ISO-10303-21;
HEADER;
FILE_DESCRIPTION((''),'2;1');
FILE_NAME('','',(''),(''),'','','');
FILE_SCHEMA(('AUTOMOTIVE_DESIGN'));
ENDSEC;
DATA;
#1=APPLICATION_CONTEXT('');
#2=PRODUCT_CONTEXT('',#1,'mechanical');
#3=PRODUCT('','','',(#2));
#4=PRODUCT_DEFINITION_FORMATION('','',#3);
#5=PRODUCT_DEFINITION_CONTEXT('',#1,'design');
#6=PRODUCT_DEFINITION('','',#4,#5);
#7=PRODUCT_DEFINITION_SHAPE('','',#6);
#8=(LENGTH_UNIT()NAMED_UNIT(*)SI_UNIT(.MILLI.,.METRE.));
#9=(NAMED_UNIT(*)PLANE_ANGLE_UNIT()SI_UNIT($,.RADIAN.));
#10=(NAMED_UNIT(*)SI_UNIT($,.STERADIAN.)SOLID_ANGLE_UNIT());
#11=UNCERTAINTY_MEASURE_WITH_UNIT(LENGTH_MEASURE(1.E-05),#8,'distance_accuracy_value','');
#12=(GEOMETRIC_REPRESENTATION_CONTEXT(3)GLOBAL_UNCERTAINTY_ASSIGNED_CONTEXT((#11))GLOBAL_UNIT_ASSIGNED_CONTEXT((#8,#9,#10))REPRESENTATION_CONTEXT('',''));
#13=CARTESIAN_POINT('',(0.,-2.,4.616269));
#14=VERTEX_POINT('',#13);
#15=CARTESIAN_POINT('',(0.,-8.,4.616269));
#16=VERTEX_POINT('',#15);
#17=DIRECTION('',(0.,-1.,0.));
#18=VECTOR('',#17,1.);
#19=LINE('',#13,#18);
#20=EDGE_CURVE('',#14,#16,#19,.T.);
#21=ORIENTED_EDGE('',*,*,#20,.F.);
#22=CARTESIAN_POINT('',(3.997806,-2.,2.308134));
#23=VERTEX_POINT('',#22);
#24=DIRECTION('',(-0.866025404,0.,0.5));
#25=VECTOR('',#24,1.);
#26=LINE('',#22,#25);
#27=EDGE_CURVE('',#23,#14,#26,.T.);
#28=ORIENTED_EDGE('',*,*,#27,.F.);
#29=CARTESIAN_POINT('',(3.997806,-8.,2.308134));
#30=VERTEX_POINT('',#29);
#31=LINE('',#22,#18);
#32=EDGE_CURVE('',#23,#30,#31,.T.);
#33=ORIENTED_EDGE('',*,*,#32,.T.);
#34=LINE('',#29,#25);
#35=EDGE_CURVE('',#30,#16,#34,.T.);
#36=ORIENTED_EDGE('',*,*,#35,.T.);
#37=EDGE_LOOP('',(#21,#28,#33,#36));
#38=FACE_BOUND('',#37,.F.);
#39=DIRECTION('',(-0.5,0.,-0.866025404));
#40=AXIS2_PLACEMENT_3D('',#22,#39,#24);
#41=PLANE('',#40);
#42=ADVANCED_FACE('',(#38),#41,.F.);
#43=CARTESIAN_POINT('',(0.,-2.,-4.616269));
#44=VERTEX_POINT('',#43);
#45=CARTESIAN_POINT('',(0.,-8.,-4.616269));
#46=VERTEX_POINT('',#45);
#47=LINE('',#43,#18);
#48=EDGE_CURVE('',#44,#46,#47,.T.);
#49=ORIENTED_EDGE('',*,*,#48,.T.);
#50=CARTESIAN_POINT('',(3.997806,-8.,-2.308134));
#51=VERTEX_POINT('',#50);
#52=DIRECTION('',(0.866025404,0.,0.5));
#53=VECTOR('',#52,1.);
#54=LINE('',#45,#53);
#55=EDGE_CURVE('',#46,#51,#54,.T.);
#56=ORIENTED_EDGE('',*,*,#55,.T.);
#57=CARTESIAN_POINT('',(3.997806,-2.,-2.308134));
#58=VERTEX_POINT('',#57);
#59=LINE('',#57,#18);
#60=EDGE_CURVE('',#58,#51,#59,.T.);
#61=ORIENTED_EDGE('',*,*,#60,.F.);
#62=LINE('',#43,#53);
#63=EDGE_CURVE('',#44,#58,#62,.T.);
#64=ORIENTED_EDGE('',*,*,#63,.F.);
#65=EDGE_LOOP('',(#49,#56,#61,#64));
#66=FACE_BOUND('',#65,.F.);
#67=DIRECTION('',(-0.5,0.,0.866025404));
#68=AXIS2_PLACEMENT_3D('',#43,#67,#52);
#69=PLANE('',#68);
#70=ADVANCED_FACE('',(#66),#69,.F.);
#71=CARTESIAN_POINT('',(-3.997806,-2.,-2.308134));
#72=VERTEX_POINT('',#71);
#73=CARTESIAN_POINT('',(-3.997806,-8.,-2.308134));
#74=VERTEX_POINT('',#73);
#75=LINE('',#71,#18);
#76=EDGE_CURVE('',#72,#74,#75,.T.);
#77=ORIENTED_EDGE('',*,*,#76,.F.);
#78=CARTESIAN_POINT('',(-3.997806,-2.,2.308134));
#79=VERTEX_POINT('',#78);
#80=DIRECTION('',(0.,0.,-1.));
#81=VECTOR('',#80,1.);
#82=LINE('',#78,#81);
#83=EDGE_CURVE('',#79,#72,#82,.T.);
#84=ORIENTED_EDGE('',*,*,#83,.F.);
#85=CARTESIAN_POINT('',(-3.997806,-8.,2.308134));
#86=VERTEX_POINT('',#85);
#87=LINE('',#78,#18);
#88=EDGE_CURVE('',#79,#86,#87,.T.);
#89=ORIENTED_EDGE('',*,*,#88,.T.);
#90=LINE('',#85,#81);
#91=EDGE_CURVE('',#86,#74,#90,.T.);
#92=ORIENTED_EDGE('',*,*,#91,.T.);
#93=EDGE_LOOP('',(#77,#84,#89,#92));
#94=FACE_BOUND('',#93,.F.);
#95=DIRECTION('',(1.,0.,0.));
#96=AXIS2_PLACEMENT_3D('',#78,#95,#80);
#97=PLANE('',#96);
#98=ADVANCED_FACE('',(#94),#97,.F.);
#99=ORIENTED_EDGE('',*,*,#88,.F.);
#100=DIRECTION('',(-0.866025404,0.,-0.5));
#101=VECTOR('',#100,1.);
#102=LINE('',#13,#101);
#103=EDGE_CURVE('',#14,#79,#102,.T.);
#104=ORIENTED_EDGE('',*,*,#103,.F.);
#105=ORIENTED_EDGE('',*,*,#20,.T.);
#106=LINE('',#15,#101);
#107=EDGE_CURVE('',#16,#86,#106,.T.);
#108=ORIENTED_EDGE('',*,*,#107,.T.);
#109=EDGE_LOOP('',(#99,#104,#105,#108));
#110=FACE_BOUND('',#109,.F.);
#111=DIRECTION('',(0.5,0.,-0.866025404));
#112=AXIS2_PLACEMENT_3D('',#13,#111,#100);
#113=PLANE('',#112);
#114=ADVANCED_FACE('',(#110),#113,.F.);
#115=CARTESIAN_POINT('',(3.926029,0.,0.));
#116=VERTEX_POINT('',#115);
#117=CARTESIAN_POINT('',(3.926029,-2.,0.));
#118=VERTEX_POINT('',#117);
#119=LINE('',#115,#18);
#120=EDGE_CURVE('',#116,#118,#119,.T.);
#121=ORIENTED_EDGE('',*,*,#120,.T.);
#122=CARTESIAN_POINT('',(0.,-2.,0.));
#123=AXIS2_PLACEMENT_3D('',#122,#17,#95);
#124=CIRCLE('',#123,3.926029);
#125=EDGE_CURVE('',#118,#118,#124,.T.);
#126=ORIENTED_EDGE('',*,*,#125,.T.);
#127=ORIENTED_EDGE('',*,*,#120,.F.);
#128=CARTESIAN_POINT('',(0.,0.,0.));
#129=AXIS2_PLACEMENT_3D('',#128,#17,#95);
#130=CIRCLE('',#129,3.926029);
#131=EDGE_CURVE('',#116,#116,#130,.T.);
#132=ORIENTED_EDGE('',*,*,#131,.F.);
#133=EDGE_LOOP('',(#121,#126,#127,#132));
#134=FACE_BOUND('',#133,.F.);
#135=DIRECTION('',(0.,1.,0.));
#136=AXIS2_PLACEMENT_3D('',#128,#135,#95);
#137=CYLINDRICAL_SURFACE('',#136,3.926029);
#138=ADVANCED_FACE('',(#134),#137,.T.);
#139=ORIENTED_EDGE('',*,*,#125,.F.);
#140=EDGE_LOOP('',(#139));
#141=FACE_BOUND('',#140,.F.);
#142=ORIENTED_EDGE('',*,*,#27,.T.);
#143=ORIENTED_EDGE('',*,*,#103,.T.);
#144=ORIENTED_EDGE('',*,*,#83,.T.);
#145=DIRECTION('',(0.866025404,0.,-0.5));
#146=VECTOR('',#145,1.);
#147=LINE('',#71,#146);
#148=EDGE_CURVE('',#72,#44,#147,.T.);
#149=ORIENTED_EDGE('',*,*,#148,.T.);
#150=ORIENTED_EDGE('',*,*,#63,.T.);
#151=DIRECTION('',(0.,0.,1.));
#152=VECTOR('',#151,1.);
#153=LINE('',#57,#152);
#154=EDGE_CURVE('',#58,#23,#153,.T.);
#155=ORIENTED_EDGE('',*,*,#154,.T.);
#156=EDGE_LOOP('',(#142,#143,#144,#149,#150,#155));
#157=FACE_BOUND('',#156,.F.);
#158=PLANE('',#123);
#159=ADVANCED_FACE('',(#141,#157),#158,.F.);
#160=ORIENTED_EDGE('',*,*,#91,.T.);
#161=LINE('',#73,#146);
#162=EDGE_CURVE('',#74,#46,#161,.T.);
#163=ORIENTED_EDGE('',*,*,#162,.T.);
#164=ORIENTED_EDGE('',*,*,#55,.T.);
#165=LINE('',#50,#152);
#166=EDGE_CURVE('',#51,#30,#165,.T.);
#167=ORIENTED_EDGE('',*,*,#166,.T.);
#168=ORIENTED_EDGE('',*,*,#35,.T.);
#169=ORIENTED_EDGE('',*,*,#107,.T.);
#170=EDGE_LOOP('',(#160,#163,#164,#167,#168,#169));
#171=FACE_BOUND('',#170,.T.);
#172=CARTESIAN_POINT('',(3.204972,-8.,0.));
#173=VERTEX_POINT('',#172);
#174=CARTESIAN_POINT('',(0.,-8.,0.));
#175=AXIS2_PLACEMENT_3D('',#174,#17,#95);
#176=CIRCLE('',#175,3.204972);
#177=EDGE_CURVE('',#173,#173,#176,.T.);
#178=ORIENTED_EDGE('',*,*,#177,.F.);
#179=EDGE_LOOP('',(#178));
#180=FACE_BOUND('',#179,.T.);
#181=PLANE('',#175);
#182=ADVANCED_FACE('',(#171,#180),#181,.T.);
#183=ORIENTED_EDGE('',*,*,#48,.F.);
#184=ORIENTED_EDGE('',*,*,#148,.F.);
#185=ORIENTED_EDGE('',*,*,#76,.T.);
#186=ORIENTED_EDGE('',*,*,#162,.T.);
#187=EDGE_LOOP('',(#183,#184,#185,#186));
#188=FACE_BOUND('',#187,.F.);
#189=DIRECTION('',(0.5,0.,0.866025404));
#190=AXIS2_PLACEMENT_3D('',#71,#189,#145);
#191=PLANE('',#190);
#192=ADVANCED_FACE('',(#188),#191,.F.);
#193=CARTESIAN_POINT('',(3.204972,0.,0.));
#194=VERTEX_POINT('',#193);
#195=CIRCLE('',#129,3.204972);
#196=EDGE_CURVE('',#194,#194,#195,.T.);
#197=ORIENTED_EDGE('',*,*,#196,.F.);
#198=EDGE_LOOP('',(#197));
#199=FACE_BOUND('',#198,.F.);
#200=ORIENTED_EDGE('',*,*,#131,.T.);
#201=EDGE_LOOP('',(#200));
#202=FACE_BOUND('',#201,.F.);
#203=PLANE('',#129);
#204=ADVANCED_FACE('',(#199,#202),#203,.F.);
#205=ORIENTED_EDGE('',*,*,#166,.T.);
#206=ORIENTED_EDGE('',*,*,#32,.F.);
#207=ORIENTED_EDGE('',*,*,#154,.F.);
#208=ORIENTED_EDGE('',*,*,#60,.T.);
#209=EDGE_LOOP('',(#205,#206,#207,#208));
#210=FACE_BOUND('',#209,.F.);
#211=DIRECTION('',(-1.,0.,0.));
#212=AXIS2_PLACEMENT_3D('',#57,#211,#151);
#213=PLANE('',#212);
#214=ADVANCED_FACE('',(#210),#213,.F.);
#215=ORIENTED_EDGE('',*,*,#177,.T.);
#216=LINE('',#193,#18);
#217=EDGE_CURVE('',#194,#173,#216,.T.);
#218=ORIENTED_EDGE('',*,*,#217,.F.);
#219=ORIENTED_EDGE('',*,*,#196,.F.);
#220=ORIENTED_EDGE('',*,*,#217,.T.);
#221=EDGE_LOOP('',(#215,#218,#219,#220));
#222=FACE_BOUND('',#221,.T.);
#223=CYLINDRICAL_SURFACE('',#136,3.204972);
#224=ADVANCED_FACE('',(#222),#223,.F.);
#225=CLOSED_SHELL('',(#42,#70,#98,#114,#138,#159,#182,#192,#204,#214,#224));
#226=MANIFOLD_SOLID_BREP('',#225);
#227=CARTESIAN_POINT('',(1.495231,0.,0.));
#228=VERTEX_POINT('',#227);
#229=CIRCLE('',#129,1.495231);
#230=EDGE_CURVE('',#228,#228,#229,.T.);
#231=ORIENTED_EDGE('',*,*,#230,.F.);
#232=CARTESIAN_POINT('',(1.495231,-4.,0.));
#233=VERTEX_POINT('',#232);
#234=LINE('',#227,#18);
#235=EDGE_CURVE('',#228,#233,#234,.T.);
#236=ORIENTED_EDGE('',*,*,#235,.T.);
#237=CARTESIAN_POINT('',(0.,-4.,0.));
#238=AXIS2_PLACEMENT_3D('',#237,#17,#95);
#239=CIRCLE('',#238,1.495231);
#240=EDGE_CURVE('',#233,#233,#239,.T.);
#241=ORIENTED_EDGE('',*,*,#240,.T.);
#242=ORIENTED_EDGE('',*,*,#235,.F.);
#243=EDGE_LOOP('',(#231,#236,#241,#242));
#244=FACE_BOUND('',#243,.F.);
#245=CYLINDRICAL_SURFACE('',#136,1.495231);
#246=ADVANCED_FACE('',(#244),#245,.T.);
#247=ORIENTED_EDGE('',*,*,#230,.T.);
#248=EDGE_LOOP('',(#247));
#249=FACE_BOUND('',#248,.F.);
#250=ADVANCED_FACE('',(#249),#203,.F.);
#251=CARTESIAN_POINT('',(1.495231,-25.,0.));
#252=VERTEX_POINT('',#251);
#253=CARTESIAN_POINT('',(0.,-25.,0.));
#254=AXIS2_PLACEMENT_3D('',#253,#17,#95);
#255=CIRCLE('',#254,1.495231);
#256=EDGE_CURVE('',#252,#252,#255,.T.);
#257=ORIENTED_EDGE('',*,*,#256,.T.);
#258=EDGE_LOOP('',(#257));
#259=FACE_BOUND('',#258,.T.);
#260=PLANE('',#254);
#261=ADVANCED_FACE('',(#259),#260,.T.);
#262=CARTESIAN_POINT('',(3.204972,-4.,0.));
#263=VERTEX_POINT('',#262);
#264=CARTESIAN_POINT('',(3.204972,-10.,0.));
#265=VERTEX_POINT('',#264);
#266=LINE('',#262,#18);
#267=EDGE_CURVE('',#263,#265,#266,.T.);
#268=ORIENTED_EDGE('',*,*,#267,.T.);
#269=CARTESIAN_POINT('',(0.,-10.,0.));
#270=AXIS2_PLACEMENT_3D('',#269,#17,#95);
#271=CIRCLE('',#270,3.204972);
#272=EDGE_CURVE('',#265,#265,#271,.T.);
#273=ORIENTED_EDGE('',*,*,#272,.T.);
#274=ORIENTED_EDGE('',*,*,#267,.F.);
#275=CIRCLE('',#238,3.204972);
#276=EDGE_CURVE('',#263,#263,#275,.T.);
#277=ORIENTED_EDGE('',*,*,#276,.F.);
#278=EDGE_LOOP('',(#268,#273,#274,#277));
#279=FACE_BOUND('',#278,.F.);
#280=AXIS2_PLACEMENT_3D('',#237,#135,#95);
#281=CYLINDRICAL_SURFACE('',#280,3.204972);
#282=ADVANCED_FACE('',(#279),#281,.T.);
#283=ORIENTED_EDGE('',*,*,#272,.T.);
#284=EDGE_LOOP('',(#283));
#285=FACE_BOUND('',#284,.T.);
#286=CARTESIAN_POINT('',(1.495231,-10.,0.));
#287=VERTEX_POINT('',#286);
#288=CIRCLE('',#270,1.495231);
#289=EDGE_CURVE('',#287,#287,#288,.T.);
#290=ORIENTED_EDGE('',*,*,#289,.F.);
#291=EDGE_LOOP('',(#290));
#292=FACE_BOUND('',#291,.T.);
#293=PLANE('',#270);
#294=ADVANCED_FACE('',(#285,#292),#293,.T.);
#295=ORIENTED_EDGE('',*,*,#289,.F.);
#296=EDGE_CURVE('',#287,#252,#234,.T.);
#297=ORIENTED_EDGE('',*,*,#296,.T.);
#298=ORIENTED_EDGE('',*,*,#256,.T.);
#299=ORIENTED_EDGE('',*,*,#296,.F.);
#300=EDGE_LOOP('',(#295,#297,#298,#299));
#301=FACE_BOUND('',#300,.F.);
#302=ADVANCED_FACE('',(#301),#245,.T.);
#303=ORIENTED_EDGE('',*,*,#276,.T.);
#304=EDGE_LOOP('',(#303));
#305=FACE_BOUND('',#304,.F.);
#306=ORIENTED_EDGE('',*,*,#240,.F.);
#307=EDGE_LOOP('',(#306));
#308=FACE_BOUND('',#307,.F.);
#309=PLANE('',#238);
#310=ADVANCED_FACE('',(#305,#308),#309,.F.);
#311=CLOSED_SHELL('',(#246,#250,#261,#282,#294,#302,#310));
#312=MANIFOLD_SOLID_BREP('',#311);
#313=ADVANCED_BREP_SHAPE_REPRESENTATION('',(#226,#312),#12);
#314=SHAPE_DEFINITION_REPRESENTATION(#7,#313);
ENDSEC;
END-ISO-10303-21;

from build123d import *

# Parameters (mm, degrees)
F0_R     = 1.495231247
F1_DEPTH = 25
F2_START = 2
F0_R_2   = 3.9260289208
F2_DEPTH = 6
F3_START = 4
F0_R_3   = 3.2049719045
F3_DEPTH = 6
F4_DEPTH = 8


with BuildPart() as f1:
    # F0 (on Front) → F1 (new body)
    with BuildSketch(Plane.XZ):
        Circle(F0_R)
    extrude(amount=F1_DEPTH)

    # F0 (on Front) → F3 (join)
    with BuildSketch(Plane.XZ.offset(F3_START)):
        Circle(F0_R_3)
        Circle(F0_R, mode=Mode.SUBTRACT)
    extrude(amount=F3_DEPTH)


with BuildPart() as f2:
    # F0 (on Front) → F2 (new body)
    with BuildSketch(Plane.XZ.offset(F2_START)):
        Polygon((3.997805994, -2.3081343668), (3.997805994, 2.3081343668), (0, 4.6162687336), (-3.997805994, 2.3081343668), (-3.997805994, -2.3081343668), (0, -4.6162687336), align=None)
        Circle(F0_R_2, mode=Mode.SUBTRACT)
    extrude(amount=F2_DEPTH)

    # F0 (on Front) → F4 (join)
    with BuildSketch(Plane.XZ):
        Circle(F0_R_2)
        Circle(F0_R_3, mode=Mode.SUBTRACT)
    extrude(amount=F4_DEPTH)


solid = Compound([f1.part, f2.part])
